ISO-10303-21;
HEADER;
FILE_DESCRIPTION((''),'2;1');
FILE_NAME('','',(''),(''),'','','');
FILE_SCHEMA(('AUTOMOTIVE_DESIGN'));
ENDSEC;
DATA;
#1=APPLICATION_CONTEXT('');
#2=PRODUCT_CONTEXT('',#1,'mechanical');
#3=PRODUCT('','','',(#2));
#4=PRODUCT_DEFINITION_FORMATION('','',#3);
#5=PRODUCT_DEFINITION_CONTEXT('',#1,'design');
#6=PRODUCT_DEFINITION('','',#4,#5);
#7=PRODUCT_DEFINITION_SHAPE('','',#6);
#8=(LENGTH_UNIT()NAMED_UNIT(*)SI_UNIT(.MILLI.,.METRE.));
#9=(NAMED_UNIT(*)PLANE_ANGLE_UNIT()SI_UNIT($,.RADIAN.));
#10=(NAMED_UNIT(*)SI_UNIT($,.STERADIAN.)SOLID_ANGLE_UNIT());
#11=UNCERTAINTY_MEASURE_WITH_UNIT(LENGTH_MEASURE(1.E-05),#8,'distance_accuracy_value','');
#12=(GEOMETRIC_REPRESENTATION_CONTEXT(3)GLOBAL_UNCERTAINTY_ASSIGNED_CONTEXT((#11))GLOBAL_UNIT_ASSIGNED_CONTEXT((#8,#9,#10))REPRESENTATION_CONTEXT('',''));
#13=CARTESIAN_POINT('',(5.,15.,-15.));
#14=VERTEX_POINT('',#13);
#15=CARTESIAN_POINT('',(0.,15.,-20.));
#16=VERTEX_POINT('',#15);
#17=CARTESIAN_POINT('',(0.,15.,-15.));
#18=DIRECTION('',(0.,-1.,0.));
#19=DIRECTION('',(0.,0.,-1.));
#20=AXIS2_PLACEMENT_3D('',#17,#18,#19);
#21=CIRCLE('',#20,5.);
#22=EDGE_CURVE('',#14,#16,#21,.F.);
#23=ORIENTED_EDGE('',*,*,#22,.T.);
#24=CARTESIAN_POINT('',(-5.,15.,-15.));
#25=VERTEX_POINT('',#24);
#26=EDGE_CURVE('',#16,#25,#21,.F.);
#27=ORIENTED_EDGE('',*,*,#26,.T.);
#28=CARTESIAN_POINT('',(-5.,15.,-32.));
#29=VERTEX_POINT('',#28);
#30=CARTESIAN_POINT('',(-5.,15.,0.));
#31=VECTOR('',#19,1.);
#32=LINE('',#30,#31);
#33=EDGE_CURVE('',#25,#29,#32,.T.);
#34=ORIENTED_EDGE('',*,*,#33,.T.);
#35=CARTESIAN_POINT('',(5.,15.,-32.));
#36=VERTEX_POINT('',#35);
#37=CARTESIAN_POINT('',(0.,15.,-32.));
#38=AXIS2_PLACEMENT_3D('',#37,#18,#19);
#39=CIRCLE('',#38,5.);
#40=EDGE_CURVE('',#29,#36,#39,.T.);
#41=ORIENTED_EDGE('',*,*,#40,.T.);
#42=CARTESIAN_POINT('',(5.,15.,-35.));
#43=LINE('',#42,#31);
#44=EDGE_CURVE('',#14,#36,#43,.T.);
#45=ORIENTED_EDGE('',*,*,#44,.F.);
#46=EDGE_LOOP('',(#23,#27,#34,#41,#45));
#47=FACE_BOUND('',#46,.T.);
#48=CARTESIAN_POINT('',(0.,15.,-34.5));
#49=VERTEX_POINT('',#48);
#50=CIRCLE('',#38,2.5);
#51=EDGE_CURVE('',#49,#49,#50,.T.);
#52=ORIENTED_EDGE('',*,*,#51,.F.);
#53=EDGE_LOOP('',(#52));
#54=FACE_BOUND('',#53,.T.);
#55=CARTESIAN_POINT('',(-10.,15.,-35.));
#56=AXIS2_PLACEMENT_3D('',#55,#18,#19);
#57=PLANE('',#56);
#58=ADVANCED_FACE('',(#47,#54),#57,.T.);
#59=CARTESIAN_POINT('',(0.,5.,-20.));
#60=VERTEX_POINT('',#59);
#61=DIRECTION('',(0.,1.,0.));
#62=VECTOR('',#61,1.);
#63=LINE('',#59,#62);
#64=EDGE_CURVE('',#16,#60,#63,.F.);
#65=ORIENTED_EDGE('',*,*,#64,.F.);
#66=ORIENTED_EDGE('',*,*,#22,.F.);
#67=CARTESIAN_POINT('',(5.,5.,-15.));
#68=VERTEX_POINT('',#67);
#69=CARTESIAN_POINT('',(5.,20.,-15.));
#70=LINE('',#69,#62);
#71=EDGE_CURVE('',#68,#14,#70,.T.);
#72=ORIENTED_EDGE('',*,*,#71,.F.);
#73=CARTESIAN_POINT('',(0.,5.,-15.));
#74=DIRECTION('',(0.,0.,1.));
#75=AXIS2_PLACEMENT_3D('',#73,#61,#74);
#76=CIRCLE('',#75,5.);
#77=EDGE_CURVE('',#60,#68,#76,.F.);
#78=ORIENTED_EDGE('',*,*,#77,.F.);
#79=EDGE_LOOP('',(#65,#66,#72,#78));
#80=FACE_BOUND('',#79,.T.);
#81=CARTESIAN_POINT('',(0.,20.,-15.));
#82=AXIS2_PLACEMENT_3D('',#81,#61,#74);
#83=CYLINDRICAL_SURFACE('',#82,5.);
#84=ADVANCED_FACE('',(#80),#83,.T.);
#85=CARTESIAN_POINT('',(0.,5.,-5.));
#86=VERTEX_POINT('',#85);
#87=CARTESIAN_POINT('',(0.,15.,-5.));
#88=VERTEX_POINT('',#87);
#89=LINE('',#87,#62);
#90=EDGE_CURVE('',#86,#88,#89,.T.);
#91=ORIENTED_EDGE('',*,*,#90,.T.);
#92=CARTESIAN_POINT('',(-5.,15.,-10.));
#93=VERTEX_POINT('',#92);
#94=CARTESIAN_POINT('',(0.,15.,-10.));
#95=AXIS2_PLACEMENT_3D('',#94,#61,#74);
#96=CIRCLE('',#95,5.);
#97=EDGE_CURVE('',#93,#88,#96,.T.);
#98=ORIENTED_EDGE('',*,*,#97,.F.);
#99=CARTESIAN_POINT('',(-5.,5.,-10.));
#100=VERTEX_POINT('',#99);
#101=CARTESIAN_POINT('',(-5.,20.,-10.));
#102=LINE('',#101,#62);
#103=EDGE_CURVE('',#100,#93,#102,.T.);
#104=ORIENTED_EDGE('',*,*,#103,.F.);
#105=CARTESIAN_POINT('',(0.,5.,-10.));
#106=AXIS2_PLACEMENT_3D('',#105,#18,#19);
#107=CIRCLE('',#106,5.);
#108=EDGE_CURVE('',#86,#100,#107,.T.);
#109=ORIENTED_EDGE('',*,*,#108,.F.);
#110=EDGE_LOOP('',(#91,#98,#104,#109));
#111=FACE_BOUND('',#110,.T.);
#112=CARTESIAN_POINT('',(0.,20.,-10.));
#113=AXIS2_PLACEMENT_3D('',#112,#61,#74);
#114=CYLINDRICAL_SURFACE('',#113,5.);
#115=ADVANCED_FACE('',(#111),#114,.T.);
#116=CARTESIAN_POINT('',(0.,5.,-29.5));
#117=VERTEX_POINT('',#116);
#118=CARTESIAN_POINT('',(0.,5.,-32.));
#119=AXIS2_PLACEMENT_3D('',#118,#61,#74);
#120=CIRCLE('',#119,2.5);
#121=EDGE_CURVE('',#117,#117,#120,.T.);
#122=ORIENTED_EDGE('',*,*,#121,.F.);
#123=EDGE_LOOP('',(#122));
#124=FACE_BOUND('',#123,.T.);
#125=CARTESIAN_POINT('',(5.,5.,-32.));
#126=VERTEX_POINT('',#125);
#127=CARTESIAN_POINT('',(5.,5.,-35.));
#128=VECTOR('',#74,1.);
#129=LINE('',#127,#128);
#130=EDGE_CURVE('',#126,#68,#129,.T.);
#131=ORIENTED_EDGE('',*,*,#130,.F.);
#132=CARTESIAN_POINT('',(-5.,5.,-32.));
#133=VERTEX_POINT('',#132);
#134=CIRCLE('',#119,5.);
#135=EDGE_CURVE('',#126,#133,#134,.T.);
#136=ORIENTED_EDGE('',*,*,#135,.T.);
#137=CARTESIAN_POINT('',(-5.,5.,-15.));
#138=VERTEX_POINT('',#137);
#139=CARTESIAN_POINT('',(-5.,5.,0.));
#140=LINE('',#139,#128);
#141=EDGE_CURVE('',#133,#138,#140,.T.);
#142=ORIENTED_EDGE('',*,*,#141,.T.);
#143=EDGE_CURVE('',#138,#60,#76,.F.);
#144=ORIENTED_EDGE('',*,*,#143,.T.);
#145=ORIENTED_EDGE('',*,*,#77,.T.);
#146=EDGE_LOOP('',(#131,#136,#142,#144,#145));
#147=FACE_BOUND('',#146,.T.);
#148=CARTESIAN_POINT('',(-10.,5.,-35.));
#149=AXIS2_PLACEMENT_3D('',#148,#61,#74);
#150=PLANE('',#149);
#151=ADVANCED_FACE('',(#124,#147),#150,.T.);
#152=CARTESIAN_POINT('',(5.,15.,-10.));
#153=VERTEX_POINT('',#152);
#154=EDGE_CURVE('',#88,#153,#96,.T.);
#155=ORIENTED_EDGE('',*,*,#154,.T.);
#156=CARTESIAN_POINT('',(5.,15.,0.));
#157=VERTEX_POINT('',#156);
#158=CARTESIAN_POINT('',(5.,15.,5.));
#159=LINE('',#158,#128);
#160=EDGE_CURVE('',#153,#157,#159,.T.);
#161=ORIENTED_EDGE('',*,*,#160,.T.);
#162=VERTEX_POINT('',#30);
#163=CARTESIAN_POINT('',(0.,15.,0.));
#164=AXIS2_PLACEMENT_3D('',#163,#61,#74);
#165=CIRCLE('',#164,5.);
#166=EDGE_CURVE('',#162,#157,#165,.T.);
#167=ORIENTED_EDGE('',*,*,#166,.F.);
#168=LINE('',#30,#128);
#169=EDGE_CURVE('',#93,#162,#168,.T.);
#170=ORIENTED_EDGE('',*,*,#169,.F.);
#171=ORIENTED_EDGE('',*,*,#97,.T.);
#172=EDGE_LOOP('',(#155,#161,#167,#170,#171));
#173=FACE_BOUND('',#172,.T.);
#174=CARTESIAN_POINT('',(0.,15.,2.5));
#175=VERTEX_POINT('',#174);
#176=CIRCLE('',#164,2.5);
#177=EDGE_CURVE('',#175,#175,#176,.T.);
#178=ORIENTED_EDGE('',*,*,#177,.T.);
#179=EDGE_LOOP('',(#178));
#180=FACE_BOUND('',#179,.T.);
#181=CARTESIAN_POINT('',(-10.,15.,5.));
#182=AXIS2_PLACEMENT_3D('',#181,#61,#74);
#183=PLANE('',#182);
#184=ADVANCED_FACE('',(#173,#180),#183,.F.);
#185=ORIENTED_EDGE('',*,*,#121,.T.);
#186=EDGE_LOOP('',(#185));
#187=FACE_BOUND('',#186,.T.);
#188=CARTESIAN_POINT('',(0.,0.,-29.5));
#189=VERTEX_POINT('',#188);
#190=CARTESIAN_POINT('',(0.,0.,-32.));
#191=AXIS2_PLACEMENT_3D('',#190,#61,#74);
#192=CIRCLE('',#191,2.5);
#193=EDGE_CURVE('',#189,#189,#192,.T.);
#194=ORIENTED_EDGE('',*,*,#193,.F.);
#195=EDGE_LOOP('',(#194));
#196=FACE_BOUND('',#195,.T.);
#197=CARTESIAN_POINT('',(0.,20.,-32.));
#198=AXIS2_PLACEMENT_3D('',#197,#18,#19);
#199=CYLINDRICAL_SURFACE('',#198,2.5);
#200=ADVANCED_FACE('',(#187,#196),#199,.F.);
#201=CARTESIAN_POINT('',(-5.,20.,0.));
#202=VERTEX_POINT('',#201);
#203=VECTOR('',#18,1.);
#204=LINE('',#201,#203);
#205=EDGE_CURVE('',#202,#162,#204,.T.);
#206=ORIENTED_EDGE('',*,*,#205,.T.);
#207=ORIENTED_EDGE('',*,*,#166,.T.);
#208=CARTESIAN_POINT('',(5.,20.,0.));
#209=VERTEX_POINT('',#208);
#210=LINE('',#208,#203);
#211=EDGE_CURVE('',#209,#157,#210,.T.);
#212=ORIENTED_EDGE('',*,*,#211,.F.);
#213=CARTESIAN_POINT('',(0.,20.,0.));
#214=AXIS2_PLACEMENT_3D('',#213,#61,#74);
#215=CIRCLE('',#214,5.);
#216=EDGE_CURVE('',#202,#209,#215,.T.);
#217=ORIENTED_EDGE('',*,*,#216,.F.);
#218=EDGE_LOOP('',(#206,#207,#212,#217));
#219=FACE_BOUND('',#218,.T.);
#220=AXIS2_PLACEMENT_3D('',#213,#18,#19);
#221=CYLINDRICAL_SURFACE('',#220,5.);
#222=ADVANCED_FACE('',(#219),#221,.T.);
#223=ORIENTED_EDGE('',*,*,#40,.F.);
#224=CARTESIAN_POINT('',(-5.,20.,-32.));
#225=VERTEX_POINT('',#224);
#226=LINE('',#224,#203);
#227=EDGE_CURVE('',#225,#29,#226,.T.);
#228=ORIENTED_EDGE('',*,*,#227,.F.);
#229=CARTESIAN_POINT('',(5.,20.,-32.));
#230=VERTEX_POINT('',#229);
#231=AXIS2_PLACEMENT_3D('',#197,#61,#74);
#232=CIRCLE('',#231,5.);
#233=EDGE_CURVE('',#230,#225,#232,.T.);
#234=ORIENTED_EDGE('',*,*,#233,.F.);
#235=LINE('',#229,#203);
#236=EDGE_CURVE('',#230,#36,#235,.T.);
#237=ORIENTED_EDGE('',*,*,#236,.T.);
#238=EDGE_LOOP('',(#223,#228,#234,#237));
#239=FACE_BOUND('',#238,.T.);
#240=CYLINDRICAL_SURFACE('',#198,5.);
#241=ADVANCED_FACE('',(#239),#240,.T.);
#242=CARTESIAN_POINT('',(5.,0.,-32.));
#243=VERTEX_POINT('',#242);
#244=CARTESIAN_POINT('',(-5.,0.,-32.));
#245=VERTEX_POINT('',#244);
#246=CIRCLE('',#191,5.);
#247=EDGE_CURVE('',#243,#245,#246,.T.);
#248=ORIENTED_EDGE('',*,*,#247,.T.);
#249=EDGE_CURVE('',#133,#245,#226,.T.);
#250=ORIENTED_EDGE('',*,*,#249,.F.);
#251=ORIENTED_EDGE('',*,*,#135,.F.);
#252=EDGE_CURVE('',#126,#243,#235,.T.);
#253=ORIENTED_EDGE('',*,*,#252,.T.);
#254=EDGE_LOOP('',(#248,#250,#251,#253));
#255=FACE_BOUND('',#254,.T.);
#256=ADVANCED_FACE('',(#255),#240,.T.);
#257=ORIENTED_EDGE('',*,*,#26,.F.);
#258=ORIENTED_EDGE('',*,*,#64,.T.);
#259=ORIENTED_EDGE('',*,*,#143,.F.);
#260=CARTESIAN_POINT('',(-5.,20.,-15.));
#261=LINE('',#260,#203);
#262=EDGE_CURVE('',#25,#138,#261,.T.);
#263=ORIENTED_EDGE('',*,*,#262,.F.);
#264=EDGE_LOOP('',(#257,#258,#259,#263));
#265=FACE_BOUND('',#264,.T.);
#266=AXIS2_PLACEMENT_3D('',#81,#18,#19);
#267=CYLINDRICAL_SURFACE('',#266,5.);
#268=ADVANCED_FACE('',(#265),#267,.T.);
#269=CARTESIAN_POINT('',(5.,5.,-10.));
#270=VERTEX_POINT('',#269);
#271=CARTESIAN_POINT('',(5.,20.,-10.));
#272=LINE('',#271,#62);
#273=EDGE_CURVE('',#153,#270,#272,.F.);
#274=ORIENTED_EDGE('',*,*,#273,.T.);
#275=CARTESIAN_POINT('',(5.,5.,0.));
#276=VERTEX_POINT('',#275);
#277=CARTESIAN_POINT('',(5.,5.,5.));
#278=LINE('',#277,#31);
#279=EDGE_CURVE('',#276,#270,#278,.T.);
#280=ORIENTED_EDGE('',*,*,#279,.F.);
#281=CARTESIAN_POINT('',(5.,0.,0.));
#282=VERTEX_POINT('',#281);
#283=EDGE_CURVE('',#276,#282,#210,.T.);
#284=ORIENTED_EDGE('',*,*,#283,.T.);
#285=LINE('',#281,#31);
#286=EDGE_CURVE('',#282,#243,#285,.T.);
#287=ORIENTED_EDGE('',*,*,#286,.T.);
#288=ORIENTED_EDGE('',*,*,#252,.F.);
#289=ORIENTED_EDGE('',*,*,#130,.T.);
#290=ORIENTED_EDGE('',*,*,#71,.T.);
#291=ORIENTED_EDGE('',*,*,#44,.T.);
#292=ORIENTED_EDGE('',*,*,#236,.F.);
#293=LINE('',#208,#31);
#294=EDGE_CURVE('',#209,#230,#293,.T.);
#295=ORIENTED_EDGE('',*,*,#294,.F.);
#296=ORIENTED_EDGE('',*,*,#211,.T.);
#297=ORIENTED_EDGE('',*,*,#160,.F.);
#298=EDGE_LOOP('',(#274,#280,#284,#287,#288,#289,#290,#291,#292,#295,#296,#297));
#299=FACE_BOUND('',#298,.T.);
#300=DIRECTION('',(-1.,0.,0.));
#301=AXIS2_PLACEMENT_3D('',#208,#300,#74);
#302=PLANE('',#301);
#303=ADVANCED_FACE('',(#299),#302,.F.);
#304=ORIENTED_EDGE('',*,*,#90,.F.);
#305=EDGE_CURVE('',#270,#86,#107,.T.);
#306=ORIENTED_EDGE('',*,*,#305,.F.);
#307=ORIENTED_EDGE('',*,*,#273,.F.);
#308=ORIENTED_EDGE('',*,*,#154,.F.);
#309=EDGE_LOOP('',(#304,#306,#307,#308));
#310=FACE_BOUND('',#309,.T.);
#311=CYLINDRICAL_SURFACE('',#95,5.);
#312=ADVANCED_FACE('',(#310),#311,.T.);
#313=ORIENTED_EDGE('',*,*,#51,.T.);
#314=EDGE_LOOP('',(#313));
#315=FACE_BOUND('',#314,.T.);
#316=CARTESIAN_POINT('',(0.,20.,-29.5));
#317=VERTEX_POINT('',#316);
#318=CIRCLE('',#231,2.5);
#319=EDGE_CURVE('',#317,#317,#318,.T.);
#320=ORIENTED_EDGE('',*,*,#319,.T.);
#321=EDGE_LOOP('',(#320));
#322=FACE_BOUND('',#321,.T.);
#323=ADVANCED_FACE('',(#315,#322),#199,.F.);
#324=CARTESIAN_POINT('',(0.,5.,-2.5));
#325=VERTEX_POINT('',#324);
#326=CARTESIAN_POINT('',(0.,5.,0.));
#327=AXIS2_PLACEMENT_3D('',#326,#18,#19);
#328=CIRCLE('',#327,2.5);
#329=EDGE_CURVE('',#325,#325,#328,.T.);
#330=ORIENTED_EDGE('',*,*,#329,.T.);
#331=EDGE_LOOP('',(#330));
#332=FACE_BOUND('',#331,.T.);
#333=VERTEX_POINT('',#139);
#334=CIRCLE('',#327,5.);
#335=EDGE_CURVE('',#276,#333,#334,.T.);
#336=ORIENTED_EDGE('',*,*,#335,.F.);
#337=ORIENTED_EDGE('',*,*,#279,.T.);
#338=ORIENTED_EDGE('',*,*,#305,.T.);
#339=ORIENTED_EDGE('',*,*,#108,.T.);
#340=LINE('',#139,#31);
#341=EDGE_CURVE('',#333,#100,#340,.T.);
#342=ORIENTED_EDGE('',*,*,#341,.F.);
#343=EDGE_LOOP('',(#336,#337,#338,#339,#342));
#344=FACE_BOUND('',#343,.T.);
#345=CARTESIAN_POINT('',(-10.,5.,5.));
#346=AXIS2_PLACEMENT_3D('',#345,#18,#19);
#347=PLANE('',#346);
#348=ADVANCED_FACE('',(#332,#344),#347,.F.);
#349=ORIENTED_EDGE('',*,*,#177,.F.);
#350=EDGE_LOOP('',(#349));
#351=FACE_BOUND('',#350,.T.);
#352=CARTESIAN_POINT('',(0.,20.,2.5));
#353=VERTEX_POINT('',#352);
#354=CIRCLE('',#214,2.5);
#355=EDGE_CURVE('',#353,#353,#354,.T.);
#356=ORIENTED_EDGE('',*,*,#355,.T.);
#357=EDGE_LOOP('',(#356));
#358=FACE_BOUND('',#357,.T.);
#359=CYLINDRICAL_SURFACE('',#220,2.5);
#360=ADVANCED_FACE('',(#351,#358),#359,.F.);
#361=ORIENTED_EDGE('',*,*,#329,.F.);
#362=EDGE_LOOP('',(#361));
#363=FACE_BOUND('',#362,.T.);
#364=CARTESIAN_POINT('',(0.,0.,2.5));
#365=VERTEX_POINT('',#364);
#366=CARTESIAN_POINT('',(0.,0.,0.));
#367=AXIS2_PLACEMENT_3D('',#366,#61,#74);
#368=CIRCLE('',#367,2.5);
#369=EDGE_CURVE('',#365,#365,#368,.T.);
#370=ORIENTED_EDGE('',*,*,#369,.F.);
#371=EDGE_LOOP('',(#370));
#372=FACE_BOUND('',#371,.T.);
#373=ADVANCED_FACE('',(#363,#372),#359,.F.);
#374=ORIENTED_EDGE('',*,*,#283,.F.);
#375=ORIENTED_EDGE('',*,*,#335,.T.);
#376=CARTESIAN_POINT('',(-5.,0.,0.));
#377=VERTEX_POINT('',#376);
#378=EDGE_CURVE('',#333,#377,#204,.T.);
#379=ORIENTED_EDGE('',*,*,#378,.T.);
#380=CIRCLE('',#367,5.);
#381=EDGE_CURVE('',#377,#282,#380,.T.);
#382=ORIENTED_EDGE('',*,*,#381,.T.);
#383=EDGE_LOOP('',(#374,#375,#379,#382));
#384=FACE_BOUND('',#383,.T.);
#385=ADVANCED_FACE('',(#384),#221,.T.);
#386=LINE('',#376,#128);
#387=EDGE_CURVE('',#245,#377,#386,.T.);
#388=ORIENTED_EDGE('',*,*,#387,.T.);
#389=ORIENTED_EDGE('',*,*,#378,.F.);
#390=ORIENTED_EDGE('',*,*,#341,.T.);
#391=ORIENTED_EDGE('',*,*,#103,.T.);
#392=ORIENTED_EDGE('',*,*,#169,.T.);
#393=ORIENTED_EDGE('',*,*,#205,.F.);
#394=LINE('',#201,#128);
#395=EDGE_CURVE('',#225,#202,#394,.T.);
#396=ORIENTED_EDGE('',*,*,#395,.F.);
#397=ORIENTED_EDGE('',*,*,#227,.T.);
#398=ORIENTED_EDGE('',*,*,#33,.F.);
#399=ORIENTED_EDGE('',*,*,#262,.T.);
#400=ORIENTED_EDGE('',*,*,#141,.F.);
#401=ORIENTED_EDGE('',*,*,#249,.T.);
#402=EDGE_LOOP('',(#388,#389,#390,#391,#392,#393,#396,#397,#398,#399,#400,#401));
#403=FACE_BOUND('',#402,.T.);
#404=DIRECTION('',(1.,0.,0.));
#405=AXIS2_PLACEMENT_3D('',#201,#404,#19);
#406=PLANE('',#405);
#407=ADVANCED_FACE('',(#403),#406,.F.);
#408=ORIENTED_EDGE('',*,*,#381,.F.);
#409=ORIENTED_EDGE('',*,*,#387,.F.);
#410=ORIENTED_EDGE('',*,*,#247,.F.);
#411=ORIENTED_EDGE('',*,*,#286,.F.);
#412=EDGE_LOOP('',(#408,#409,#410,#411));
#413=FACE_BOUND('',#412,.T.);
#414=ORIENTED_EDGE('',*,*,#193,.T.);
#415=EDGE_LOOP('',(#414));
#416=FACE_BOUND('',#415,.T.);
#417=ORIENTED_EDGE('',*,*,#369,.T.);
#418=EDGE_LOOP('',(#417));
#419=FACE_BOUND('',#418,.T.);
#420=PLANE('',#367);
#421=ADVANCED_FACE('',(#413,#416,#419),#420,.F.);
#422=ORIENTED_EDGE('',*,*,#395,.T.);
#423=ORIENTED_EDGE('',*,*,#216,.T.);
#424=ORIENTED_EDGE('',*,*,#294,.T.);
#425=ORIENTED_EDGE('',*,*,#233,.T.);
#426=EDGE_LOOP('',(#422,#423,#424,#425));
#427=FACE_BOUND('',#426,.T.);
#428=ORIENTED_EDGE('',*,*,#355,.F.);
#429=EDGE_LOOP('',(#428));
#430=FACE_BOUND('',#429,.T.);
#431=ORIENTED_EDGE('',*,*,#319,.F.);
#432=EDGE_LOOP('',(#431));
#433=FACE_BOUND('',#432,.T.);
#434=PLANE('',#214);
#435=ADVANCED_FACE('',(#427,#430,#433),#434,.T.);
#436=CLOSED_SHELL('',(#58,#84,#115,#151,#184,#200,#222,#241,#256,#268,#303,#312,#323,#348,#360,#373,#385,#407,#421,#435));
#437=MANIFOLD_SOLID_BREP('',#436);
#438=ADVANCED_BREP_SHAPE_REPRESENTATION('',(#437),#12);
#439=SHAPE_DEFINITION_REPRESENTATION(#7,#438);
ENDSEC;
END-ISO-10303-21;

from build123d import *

# Parameters (mm, degrees)
SKETCH1_R           = 2.5
BOSS_EXTRUDE1_DEPTH = 20
SKETCH2_W           = 10
SKETCH2_H           = 10
CUT_EXTRUDE1_DEPTH  = 15
FILLET1_R           = 5
SKETCH3_W           = 25
SKETCH3_H           = 10
CUT_EXTRUDE3_DEPTH  = 10
FILLET3_R           = 5


with BuildPart() as part:
    # Sketch1 → Boss-Extrude1 (new body)
    with BuildSketch(Plane(origin=(0, 0, 0), x_dir=(1, 0, 0), z_dir=(0, 1, 0))):
        with BuildLine():
            Line((-5, 0), (-5, 32))
            ThreePointArc((-5, 32), (0, 37), (5, 32))
            Line((5, 32), (5, 0))
            ThreePointArc((5, 0), (0, -5), (-5, 0))
        make_face()
        with Locations(Location((0, 32, 0), (0, 0, 270))):
            Circle(SKETCH1_R, mode=Mode.SUBTRACT)
        with Locations(Location((0, 0, 0), (0, 0, 270))):
            Circle(SKETCH1_R, mode=Mode.SUBTRACT)
    extrude(amount=BOSS_EXTRUDE1_DEPTH)

    # Sketch2 → Cut-Extrude1 (cut)
    with BuildSketch(Plane(origin=(5, 0, 0), x_dir=(0, 0, -1), z_dir=(1, 0, 0))):
        with Locations((0, 10)):
            Rectangle(SKETCH2_W, SKETCH2_H)
    cut_extrude1 = extrude(amount=-CUT_EXTRUDE1_DEPTH, mode=Mode.SUBTRACT)

    # Mirror1: Cut-Extrude1 across plane
    add(cut_extrude1.mirror(Plane.XY.offset(-15)), mode=Mode.SUBTRACT)

    # Fillet1
    fillet1_edges = [part.edges().sort_by_distance(p)[0] for p in [
        (-5, 10, -25),
        (5, 10, -25),
        (-5, 10, -5),
        (5, 10, -5),
    ]]
    fillet(fillet1_edges, radius=FILLET1_R - 0.0001)  # a hair under: the kernel refuses the full size

    # Sketch3 → Cut-Extrude3 (cut)
    with BuildSketch(Plane(origin=(5, 0, 0), x_dir=(0, 0, -1), z_dir=(1, 0, 0))):
        with Locations((32.5, 10)):
            Rectangle(SKETCH3_W, SKETCH3_H)
    extrude(amount=-CUT_EXTRUDE3_DEPTH, mode=Mode.SUBTRACT)

    # Fillet3
    fillet3_edges = [part.edges().sort_by_distance(p)[0] for p in [
        (-5, 10, -20.0001),
        (5, 10, -20.0001),
    ]]
    fillet(fillet3_edges, radius=FILLET3_R - 0.0001)  # a hair under: the kernel refuses the full size


solid = part.part
